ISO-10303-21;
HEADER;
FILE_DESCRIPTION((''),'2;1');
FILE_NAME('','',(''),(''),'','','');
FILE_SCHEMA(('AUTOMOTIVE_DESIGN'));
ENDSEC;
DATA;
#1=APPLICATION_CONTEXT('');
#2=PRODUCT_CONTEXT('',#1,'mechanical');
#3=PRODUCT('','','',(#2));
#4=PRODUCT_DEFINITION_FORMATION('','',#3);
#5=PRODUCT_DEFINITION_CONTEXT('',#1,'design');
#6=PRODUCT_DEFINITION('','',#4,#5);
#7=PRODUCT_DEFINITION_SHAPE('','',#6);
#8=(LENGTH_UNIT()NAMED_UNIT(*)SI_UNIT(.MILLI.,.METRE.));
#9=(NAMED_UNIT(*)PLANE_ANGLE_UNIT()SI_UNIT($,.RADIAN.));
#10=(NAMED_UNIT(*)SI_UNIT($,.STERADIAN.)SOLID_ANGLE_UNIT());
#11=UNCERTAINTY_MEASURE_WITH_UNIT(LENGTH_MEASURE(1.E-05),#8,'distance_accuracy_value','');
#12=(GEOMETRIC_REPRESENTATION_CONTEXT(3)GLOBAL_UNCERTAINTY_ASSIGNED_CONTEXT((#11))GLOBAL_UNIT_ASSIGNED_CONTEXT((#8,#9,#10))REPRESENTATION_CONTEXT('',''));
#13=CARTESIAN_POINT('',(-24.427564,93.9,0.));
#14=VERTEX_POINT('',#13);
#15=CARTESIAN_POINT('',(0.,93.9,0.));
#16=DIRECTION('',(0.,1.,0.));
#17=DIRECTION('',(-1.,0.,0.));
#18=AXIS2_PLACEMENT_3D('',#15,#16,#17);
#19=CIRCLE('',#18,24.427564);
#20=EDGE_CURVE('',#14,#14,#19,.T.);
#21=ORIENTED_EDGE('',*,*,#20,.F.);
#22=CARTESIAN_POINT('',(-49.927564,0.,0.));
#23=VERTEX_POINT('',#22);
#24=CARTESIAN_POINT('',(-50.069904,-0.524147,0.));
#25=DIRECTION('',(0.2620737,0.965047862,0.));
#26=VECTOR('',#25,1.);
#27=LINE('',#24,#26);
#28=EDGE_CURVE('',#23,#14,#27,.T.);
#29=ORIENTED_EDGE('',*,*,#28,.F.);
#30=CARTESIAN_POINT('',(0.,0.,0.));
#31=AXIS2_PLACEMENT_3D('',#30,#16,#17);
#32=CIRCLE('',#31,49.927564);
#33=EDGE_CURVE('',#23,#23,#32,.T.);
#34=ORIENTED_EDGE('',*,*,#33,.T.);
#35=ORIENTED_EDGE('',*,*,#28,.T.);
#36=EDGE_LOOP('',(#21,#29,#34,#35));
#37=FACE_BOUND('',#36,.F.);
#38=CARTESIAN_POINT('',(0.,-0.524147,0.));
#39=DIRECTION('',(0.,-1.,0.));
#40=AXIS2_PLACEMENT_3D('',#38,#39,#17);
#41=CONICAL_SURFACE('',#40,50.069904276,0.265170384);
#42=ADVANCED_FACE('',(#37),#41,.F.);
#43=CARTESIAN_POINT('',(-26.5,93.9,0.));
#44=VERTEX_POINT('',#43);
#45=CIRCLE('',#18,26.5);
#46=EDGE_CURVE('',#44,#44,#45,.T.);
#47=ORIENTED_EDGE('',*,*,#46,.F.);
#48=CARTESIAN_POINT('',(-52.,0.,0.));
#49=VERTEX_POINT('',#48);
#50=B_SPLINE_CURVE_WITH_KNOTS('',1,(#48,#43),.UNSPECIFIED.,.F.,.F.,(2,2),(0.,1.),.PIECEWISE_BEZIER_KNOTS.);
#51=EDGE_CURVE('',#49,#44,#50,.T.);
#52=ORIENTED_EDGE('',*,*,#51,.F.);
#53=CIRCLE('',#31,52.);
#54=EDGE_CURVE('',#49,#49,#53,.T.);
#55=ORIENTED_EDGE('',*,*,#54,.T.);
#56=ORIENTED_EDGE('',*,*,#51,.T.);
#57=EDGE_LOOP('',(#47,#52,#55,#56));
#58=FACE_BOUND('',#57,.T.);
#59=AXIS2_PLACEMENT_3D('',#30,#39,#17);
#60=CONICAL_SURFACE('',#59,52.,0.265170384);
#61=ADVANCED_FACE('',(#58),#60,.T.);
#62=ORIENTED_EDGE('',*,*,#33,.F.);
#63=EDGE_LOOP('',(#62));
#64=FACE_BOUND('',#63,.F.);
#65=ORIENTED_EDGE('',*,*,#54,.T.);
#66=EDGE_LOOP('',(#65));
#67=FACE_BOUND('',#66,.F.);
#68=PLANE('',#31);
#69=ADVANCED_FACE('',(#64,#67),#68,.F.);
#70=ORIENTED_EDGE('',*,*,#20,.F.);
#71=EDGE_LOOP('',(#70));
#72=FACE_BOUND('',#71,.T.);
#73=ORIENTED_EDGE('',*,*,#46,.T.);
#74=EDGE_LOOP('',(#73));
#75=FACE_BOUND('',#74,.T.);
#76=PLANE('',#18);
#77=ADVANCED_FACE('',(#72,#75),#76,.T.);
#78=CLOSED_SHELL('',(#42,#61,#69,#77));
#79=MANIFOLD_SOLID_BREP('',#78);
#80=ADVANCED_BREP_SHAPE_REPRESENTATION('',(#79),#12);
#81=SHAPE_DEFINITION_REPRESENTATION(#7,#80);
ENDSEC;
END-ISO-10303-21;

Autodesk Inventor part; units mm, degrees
ref_plane "YZ Plane" through (0, 0, 0) normal (1, 0, 0) x (0, 1, 0)
ref_plane "XY Plane" through (0, 0, 0) normal (0, 0, 1) x (1, 0, 0)
sketch "Szkic6" plane through (0, 0, 0) normal (0, 1, 0) x (-1, 0, 0)
  circle A0 centre (0, 0) radius 52
  dimension "d33" = 104
ref_plane "Płaszczyzna konstrukcyjna1" through (0, 93.9, 0) normal (0, 1, 0) x (-1, 0, 0)
sketch "Szkic7" plane through (0, 93.9, 0) normal (0, 1, 0) x (-1, 0, 0)
  circle A0 centre (0, 0) radius 26.5
  dimension "d35" = 53
loft "Wyciągnięcie złożone1" add profiles "Szkic6", "Szkic7"
shell "Skorupa1" thickness 2 removed faces 2 at (-1.8199, 93.9, -2.5499) at (-18.5271, 0, 25.061)
equation "\"d33\" = OD1"
equation "\"d35\" = OD2"
equation "\"d52\" = THK"
equation "\"SzerokośćGięciaPodcięcia\" = Grubość"
equation "\"RozmiarPodcięciaNarożnika\" = 4 * Grubość"
equation "\"PromieńPrzejścia\" = PromieńGięcia"
equation "\"Rozmiar_promienia_Jacobiego\" = PromieńGięcia"
equation "\"Wielk_odstępu\" = Grubość"
equation "\"d2\" = PromieńGięcia"
equation "\"d23\" = PromieńGięcia"
equation "\"OD1\" = 104"
equation "\"OD2\" = 53"
equation "\"L\" = 93.9"
equation "\"THK\" = 2"
equation "\"d34\" = L"
equation "\"Grubość\" = 1.5"
equation "\"PromieńGięcia\" = 3"
properties part number "Redukcja symetryczna Ø104x53x2 L=93,9" material "304"
